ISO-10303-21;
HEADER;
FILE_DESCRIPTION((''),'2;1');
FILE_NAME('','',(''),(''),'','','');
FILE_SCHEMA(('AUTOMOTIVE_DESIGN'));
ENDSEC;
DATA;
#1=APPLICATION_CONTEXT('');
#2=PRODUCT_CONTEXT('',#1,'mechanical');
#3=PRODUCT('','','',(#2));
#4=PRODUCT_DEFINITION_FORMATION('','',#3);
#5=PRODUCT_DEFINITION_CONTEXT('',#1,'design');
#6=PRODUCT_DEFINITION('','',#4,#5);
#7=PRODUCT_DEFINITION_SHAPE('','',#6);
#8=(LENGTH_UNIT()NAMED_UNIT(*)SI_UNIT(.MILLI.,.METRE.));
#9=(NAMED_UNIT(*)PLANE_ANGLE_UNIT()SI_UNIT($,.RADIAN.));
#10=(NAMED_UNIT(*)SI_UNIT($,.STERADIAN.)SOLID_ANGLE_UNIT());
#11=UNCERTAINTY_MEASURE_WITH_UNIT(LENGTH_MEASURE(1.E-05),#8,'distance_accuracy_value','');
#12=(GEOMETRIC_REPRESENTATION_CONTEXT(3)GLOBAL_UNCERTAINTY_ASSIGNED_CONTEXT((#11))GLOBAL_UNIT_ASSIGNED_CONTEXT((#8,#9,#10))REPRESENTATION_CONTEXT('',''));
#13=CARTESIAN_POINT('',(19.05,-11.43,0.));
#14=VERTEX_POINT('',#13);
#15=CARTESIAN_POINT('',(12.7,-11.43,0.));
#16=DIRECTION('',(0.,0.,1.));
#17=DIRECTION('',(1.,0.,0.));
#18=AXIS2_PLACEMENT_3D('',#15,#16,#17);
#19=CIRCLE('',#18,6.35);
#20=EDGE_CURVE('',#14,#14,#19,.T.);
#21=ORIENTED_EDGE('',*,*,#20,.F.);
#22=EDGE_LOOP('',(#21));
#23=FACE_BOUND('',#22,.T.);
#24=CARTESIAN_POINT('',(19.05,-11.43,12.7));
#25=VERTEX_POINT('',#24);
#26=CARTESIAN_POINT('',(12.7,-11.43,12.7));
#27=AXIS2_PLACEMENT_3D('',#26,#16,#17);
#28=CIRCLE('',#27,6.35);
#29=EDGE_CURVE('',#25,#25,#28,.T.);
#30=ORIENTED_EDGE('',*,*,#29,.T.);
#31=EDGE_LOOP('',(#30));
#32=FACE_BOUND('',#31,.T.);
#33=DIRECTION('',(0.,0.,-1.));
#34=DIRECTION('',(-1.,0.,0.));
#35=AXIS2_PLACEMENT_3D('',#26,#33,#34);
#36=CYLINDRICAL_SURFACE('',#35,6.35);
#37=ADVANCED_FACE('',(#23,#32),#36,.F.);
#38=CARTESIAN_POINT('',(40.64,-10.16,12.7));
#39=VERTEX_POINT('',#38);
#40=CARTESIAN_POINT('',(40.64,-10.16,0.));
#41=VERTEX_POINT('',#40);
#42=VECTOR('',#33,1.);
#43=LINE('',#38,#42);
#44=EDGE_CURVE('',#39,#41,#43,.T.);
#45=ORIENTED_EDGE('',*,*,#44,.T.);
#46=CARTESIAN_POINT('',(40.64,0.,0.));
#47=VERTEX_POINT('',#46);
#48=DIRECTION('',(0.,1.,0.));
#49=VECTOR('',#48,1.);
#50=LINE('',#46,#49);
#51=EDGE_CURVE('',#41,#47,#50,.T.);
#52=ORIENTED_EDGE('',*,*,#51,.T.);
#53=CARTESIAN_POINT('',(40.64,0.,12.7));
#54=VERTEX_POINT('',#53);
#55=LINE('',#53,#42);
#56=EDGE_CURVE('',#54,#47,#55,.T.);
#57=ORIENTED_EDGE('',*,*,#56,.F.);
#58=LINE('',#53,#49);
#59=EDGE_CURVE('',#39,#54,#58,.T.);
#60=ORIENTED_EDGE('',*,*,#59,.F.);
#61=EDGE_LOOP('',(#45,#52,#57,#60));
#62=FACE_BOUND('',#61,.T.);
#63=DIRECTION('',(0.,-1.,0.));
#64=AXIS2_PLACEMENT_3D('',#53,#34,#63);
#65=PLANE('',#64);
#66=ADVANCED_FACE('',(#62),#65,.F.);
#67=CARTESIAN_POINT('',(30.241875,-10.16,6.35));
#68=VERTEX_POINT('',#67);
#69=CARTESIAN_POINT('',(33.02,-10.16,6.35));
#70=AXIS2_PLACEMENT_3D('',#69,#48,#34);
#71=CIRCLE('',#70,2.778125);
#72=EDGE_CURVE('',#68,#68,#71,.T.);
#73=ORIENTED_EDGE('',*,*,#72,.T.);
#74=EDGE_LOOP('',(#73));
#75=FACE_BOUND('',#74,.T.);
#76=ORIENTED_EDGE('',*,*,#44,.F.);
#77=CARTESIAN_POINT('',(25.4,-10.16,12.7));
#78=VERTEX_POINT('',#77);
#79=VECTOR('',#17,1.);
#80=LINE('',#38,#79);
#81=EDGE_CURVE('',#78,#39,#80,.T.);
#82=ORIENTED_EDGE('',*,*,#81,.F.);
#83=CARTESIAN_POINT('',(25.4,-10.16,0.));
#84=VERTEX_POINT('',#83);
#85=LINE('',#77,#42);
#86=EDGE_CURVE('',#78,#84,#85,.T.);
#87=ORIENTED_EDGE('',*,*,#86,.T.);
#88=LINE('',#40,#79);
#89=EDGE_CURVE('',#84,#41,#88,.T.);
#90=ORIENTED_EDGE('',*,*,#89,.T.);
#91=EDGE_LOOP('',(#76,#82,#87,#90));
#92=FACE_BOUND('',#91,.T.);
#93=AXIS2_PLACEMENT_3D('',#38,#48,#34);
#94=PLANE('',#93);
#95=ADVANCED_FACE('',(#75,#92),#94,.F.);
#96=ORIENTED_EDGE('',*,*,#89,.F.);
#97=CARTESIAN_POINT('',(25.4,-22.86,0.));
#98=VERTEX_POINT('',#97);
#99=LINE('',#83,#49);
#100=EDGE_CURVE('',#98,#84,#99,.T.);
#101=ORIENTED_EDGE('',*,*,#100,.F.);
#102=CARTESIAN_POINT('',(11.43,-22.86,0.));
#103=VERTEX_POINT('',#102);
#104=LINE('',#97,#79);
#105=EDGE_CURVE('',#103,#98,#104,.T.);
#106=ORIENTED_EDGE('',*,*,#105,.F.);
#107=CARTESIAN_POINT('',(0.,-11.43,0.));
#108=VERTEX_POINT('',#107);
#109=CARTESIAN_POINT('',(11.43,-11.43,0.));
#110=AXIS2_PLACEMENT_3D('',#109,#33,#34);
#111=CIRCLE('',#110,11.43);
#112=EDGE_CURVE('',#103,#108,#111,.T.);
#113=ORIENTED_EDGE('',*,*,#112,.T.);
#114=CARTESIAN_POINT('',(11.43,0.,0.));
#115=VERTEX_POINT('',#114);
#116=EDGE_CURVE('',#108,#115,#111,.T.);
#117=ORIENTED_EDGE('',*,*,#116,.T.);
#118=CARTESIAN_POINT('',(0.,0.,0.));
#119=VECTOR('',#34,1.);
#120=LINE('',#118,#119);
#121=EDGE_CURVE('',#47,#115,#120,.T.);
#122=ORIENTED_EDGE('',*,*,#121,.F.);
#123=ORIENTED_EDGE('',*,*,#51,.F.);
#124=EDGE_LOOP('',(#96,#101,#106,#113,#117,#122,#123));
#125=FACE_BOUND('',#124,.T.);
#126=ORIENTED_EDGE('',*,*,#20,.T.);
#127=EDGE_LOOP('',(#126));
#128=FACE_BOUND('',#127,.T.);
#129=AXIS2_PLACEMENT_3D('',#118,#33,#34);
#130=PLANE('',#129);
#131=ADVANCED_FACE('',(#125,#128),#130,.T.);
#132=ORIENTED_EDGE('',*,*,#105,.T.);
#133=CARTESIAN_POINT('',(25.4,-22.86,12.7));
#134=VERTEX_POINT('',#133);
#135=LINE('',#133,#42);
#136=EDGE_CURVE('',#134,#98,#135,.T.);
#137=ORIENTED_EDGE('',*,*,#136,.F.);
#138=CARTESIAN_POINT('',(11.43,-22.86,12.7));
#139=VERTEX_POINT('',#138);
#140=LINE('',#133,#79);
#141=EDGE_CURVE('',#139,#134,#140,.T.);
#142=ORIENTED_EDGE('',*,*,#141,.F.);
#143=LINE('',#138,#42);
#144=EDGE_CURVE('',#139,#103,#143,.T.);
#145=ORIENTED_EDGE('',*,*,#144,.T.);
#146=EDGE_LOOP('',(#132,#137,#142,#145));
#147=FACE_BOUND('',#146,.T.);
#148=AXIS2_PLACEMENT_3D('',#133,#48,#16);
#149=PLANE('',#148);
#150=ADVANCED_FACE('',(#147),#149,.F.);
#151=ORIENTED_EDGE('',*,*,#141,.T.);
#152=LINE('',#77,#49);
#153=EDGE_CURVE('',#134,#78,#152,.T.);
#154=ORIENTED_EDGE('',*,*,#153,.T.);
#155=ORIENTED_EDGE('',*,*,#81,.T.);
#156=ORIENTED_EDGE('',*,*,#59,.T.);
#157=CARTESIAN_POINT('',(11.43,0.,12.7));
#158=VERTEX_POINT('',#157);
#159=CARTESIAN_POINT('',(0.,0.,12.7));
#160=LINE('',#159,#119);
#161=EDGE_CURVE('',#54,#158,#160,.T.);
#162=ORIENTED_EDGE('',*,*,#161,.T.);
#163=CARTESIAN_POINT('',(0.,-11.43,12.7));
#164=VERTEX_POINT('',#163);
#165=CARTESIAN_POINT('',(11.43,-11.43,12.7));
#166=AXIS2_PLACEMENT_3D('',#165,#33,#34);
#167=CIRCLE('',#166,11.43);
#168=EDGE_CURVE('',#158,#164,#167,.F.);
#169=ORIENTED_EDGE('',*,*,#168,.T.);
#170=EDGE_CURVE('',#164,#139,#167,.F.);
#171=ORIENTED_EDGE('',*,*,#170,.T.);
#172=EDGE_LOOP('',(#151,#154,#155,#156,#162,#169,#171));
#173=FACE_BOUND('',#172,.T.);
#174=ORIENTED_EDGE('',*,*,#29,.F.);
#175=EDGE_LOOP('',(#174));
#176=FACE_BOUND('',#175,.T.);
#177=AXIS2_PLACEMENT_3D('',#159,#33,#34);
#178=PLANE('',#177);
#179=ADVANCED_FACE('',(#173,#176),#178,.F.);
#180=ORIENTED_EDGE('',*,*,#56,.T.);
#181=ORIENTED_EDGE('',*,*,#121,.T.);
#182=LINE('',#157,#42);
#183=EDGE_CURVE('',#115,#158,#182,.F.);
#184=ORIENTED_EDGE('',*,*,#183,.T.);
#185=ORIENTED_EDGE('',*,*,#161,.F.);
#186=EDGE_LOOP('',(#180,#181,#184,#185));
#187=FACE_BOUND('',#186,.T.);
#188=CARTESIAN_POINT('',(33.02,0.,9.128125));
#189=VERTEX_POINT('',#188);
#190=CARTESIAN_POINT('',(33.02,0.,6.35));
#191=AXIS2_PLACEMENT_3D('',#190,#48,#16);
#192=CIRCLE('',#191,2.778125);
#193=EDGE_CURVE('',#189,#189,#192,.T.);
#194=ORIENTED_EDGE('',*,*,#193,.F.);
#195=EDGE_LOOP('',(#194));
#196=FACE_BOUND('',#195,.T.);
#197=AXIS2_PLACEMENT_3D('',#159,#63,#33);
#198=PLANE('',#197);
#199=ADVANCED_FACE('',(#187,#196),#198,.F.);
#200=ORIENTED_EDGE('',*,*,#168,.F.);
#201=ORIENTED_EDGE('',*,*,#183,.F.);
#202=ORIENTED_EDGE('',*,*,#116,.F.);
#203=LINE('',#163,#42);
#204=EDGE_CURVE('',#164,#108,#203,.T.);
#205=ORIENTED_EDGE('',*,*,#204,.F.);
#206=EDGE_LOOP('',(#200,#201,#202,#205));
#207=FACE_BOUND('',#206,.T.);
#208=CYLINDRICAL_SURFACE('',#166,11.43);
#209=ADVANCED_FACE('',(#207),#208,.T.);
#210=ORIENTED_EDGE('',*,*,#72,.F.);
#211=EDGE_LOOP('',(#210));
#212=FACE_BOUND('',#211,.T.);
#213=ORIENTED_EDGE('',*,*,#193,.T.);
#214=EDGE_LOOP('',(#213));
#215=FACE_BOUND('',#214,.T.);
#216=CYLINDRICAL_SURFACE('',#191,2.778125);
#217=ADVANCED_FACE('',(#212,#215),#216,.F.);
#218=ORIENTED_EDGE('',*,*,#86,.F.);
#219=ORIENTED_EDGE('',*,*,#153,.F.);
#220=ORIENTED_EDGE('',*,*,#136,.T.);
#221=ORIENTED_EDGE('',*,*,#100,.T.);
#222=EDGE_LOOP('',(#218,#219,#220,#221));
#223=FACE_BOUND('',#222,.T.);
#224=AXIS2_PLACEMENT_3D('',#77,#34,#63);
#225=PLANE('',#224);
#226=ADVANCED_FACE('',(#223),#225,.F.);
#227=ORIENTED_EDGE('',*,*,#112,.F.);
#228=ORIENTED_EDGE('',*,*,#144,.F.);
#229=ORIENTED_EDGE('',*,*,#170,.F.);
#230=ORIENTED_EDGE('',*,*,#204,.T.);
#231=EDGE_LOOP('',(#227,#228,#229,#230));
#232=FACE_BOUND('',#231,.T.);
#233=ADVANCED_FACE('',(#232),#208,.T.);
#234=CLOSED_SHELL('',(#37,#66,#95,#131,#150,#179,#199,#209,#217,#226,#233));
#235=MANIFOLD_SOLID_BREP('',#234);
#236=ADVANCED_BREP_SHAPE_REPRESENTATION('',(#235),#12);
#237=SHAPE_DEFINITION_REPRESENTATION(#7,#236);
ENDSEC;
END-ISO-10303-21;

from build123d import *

# Parameters (mm, degrees)
SKETCH2_R                           = 6.35
BOSS_EXTRUDE1_DEPTH                 = 12.7
FILLET3_R                           = 11.43
F_7_32_0_21875_DIAMETER_HOLE1_D     = 5.55625
F_7_32_0_21875_DIAMETER_HOLE1_DEPTH = 36.430734093
F_7_32_0_21875_DIAMETER_HOLE1_TIP   = 1.669265907


with BuildPart() as part:
    # Sketch2 → Boss-Extrude1 (new body)
    with BuildSketch(Plane.XY):
        Polygon((0, 0), (40.64, 0), (40.64, -10.16), (25.4, -10.16), (25.4, -22.86), (0, -22.86), align=None)
        with Locations((12.7, -11.43)):
            Circle(SKETCH2_R, mode=Mode.SUBTRACT)
    extrude(amount=BOSS_EXTRUDE1_DEPTH)

    # Fillet3
    fillet3_edges = [part.edges().sort_by_distance(p)[0] for p in [
        (0, -22.86, 6.35),
        (0, 0, 6.35),
    ]]
    fillet(fillet3_edges, radius=FILLET3_R - 0.0001)  # a hair under: the kernel refuses the full size

    # 7/32 (0.21875) Diameter Hole1
    with Locations(Plane(origin=(33.02, 0, 6.35), x_dir=(0, 0, 1), z_dir=(0, 1, 0))):
        with Locations((0, 0)):
            Hole(F_7_32_0_21875_DIAMETER_HOLE1_D / 2, depth=F_7_32_0_21875_DIAMETER_HOLE1_DEPTH)
            with Locations((0, 0, -(F_7_32_0_21875_DIAMETER_HOLE1_DEPTH + F_7_32_0_21875_DIAMETER_HOLE1_TIP / 2))):  # 118° drill point
                Cone(0, F_7_32_0_21875_DIAMETER_HOLE1_D / 2, F_7_32_0_21875_DIAMETER_HOLE1_TIP, mode=Mode.SUBTRACT)


solid = part.part
